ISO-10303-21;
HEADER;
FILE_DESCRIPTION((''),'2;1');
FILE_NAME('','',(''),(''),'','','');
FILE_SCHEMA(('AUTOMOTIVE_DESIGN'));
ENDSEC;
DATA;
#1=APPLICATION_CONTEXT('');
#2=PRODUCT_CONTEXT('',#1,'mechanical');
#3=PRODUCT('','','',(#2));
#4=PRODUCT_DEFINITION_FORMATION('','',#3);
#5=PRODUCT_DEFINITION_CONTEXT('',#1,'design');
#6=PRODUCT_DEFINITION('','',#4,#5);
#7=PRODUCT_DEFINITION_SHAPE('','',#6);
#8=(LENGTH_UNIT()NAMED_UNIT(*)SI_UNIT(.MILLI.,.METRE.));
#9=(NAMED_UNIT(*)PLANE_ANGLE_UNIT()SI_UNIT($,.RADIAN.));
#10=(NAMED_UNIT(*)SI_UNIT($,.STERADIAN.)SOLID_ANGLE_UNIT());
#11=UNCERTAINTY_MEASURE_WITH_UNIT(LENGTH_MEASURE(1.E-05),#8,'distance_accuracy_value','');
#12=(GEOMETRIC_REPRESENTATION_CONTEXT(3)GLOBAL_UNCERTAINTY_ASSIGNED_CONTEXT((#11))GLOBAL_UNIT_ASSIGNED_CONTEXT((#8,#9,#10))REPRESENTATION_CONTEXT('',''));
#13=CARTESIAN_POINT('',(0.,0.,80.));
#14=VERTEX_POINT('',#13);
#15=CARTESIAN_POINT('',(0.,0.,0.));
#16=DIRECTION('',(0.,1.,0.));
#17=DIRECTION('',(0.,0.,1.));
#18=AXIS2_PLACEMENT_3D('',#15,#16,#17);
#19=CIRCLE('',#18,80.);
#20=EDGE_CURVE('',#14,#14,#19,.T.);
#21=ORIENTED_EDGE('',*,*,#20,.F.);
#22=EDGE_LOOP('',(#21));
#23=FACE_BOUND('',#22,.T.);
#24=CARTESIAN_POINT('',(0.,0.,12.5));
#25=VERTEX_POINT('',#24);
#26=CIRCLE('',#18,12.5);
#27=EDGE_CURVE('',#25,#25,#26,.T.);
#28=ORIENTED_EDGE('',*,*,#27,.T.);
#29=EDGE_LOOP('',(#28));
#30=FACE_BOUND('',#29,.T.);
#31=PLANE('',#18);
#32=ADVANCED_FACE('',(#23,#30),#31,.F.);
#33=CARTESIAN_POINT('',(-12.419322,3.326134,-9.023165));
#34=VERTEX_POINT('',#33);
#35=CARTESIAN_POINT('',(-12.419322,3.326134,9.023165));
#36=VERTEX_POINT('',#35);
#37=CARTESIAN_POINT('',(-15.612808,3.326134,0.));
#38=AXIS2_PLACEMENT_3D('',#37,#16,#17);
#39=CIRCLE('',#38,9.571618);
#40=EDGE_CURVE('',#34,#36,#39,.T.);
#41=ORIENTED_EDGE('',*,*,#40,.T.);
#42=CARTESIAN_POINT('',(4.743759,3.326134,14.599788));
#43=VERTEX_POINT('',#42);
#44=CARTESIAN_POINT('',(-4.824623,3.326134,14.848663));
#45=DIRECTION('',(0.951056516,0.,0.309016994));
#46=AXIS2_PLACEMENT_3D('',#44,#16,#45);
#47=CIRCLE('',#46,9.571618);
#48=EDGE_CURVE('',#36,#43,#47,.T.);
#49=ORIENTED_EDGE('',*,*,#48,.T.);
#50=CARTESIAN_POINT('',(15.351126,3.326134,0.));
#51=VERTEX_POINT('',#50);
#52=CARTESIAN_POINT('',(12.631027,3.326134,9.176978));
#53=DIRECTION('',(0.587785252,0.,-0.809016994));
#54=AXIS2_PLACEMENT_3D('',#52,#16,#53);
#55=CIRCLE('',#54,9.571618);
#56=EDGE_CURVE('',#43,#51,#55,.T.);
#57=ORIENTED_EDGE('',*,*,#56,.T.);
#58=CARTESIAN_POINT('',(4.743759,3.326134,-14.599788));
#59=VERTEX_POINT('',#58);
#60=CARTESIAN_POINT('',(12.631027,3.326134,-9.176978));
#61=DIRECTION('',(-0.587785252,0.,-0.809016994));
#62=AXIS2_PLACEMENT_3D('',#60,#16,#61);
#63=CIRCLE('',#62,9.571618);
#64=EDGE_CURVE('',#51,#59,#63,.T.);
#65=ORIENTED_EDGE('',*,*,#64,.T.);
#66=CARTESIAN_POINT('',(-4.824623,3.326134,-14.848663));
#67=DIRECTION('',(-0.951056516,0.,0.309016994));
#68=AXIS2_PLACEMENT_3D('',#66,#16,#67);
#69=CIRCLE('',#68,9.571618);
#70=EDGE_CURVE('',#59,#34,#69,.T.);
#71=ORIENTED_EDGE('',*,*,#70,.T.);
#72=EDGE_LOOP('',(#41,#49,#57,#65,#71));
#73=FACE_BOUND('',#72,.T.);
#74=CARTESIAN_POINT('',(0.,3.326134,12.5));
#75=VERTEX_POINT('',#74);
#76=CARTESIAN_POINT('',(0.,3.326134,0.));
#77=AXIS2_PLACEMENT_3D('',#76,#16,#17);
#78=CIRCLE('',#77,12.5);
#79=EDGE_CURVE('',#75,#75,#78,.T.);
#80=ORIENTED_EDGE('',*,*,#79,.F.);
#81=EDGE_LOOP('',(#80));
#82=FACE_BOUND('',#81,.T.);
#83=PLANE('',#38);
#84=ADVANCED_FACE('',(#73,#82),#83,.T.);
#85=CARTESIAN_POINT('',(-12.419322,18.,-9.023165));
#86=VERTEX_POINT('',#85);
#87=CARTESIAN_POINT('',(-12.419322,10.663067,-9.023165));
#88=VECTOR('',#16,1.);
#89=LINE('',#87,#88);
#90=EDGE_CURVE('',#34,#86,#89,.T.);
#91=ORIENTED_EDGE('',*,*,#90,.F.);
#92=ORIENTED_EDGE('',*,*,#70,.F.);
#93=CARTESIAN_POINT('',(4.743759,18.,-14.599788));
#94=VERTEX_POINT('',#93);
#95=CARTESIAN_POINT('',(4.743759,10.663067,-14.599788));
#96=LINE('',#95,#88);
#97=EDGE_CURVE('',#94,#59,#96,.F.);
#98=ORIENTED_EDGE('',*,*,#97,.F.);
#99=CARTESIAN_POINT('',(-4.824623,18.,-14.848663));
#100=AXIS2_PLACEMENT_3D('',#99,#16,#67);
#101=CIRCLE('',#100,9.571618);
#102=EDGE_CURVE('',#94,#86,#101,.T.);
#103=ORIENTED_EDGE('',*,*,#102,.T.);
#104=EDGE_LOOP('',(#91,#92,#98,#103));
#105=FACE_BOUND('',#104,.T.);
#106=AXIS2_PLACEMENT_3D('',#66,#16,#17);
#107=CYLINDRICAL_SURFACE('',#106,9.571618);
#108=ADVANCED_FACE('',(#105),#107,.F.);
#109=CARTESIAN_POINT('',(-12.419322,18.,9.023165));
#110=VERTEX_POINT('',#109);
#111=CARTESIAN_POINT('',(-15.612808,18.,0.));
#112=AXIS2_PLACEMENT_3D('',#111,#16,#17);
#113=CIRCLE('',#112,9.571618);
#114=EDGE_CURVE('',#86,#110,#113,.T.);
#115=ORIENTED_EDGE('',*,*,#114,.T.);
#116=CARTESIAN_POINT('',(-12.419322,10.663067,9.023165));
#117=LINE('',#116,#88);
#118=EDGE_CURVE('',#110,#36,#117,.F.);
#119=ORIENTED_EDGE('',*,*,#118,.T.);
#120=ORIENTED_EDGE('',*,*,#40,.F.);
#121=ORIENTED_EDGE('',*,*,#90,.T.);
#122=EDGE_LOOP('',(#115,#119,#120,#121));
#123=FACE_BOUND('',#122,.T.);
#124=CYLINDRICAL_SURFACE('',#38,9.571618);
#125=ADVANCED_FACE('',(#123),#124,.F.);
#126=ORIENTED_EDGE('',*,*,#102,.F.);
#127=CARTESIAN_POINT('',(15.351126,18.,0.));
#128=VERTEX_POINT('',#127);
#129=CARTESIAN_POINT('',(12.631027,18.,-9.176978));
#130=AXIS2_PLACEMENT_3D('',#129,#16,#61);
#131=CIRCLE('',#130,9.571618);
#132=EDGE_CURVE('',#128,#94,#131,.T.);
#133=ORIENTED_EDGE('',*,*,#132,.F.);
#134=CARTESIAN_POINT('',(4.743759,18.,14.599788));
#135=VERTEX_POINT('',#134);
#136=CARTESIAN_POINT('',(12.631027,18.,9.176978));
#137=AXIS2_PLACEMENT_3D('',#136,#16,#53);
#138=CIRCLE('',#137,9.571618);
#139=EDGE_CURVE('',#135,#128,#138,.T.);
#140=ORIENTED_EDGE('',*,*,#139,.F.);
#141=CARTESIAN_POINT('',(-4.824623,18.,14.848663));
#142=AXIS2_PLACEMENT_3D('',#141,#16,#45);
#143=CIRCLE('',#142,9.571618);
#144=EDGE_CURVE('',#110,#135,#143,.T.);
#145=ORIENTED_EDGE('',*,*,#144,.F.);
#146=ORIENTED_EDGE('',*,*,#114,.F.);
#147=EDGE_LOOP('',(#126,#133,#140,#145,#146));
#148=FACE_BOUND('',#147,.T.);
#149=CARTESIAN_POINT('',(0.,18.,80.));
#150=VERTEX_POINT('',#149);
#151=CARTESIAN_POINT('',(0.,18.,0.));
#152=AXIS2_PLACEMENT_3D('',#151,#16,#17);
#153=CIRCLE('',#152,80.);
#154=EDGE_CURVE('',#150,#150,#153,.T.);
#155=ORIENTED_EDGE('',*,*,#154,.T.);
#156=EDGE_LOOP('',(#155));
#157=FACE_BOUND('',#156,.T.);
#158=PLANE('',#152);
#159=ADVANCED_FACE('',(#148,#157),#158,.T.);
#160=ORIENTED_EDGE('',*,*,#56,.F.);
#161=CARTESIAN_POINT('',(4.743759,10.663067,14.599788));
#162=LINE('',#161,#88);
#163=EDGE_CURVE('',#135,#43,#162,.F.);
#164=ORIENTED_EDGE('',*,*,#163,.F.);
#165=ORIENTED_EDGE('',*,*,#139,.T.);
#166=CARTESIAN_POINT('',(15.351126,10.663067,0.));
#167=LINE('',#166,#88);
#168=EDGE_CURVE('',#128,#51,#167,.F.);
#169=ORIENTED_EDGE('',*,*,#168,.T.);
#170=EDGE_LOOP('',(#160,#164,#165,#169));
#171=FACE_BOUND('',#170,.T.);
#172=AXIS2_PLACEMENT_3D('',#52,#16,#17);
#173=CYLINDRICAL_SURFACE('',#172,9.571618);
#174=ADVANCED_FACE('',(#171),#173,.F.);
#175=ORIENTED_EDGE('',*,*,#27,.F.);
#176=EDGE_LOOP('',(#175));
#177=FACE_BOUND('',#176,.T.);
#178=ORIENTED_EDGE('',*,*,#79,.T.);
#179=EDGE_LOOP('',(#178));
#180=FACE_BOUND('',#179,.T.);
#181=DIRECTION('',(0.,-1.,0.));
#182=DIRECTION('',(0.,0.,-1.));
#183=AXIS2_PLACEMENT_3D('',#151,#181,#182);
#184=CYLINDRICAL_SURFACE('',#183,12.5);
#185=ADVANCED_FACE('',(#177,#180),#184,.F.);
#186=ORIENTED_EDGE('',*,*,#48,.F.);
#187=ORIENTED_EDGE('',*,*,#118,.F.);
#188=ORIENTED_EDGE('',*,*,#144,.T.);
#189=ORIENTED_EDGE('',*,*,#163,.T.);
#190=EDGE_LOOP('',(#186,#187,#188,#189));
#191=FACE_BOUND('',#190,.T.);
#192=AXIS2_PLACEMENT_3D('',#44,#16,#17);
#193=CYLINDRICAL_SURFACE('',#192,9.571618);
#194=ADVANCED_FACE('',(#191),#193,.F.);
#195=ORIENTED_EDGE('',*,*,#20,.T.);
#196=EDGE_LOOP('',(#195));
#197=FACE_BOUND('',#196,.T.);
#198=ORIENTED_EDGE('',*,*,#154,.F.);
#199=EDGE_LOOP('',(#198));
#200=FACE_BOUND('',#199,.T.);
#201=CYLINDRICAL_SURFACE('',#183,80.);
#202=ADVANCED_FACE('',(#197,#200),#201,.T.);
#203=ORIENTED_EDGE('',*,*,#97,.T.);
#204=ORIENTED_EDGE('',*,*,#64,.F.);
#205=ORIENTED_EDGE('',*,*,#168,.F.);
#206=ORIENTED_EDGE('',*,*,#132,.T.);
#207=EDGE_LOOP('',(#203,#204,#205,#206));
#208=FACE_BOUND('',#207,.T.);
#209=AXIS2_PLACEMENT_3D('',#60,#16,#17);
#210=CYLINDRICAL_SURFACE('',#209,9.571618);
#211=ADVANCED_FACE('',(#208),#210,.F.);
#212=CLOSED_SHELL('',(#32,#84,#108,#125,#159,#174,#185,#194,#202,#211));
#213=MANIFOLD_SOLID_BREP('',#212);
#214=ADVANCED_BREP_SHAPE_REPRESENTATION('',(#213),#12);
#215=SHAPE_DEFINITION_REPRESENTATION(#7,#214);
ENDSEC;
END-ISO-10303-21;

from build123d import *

# Parameters (mm, degrees)
SKETCH1_R           = 80
BOSS_EXTRUDE1_DEPTH = 18
SKETCH2_R           = 12.5
CUT_EXTRUDE1_DEPTH  = 115.560027933
SKETCH3_R           = 9.571617906
CUT_EXTRUDE2_DEPTH  = 14.673865943
CIRPATTERN1_COUNT   = 5


with BuildPart() as part:
    # Sketch1 → Boss-Extrude1 (new body)
    with BuildSketch(Plane(origin=(0, 0, 0), x_dir=(1, 0, 0), z_dir=(0, 1, 0))):
        Circle(SKETCH1_R)
    extrude(amount=BOSS_EXTRUDE1_DEPTH)

    # Sketch2 → Cut-Extrude1 (cut, through all)
    with BuildSketch(Plane(origin=(0, 0, 0), x_dir=(1, 0, 0), z_dir=(0, 1, 0))):
        Circle(SKETCH2_R)
    extrude(amount=CUT_EXTRUDE1_DEPTH, mode=Mode.SUBTRACT)

    # Sketch3 → Cut-Extrude2 (cut)
    with BuildSketch(Plane(origin=(0, 18, 0), x_dir=(1, 0, 0), z_dir=(0, 1, 0))):
        with Locations((-15.612808267, 0)):
            Circle(SKETCH3_R)
    cut_extrude2 = extrude(amount=-CUT_EXTRUDE2_DEPTH, mode=Mode.SUBTRACT)

    # CirPattern1: Cut-Extrude2 ×5 about axis
    cirpattern1_axis = Axis((0, 0, 0), (0, 1, 0))
    for i in range(1, CIRPATTERN1_COUNT):
        add(cut_extrude2.rotate(cirpattern1_axis, i * 360 / CIRPATTERN1_COUNT), mode=Mode.SUBTRACT)


solid = part.part
